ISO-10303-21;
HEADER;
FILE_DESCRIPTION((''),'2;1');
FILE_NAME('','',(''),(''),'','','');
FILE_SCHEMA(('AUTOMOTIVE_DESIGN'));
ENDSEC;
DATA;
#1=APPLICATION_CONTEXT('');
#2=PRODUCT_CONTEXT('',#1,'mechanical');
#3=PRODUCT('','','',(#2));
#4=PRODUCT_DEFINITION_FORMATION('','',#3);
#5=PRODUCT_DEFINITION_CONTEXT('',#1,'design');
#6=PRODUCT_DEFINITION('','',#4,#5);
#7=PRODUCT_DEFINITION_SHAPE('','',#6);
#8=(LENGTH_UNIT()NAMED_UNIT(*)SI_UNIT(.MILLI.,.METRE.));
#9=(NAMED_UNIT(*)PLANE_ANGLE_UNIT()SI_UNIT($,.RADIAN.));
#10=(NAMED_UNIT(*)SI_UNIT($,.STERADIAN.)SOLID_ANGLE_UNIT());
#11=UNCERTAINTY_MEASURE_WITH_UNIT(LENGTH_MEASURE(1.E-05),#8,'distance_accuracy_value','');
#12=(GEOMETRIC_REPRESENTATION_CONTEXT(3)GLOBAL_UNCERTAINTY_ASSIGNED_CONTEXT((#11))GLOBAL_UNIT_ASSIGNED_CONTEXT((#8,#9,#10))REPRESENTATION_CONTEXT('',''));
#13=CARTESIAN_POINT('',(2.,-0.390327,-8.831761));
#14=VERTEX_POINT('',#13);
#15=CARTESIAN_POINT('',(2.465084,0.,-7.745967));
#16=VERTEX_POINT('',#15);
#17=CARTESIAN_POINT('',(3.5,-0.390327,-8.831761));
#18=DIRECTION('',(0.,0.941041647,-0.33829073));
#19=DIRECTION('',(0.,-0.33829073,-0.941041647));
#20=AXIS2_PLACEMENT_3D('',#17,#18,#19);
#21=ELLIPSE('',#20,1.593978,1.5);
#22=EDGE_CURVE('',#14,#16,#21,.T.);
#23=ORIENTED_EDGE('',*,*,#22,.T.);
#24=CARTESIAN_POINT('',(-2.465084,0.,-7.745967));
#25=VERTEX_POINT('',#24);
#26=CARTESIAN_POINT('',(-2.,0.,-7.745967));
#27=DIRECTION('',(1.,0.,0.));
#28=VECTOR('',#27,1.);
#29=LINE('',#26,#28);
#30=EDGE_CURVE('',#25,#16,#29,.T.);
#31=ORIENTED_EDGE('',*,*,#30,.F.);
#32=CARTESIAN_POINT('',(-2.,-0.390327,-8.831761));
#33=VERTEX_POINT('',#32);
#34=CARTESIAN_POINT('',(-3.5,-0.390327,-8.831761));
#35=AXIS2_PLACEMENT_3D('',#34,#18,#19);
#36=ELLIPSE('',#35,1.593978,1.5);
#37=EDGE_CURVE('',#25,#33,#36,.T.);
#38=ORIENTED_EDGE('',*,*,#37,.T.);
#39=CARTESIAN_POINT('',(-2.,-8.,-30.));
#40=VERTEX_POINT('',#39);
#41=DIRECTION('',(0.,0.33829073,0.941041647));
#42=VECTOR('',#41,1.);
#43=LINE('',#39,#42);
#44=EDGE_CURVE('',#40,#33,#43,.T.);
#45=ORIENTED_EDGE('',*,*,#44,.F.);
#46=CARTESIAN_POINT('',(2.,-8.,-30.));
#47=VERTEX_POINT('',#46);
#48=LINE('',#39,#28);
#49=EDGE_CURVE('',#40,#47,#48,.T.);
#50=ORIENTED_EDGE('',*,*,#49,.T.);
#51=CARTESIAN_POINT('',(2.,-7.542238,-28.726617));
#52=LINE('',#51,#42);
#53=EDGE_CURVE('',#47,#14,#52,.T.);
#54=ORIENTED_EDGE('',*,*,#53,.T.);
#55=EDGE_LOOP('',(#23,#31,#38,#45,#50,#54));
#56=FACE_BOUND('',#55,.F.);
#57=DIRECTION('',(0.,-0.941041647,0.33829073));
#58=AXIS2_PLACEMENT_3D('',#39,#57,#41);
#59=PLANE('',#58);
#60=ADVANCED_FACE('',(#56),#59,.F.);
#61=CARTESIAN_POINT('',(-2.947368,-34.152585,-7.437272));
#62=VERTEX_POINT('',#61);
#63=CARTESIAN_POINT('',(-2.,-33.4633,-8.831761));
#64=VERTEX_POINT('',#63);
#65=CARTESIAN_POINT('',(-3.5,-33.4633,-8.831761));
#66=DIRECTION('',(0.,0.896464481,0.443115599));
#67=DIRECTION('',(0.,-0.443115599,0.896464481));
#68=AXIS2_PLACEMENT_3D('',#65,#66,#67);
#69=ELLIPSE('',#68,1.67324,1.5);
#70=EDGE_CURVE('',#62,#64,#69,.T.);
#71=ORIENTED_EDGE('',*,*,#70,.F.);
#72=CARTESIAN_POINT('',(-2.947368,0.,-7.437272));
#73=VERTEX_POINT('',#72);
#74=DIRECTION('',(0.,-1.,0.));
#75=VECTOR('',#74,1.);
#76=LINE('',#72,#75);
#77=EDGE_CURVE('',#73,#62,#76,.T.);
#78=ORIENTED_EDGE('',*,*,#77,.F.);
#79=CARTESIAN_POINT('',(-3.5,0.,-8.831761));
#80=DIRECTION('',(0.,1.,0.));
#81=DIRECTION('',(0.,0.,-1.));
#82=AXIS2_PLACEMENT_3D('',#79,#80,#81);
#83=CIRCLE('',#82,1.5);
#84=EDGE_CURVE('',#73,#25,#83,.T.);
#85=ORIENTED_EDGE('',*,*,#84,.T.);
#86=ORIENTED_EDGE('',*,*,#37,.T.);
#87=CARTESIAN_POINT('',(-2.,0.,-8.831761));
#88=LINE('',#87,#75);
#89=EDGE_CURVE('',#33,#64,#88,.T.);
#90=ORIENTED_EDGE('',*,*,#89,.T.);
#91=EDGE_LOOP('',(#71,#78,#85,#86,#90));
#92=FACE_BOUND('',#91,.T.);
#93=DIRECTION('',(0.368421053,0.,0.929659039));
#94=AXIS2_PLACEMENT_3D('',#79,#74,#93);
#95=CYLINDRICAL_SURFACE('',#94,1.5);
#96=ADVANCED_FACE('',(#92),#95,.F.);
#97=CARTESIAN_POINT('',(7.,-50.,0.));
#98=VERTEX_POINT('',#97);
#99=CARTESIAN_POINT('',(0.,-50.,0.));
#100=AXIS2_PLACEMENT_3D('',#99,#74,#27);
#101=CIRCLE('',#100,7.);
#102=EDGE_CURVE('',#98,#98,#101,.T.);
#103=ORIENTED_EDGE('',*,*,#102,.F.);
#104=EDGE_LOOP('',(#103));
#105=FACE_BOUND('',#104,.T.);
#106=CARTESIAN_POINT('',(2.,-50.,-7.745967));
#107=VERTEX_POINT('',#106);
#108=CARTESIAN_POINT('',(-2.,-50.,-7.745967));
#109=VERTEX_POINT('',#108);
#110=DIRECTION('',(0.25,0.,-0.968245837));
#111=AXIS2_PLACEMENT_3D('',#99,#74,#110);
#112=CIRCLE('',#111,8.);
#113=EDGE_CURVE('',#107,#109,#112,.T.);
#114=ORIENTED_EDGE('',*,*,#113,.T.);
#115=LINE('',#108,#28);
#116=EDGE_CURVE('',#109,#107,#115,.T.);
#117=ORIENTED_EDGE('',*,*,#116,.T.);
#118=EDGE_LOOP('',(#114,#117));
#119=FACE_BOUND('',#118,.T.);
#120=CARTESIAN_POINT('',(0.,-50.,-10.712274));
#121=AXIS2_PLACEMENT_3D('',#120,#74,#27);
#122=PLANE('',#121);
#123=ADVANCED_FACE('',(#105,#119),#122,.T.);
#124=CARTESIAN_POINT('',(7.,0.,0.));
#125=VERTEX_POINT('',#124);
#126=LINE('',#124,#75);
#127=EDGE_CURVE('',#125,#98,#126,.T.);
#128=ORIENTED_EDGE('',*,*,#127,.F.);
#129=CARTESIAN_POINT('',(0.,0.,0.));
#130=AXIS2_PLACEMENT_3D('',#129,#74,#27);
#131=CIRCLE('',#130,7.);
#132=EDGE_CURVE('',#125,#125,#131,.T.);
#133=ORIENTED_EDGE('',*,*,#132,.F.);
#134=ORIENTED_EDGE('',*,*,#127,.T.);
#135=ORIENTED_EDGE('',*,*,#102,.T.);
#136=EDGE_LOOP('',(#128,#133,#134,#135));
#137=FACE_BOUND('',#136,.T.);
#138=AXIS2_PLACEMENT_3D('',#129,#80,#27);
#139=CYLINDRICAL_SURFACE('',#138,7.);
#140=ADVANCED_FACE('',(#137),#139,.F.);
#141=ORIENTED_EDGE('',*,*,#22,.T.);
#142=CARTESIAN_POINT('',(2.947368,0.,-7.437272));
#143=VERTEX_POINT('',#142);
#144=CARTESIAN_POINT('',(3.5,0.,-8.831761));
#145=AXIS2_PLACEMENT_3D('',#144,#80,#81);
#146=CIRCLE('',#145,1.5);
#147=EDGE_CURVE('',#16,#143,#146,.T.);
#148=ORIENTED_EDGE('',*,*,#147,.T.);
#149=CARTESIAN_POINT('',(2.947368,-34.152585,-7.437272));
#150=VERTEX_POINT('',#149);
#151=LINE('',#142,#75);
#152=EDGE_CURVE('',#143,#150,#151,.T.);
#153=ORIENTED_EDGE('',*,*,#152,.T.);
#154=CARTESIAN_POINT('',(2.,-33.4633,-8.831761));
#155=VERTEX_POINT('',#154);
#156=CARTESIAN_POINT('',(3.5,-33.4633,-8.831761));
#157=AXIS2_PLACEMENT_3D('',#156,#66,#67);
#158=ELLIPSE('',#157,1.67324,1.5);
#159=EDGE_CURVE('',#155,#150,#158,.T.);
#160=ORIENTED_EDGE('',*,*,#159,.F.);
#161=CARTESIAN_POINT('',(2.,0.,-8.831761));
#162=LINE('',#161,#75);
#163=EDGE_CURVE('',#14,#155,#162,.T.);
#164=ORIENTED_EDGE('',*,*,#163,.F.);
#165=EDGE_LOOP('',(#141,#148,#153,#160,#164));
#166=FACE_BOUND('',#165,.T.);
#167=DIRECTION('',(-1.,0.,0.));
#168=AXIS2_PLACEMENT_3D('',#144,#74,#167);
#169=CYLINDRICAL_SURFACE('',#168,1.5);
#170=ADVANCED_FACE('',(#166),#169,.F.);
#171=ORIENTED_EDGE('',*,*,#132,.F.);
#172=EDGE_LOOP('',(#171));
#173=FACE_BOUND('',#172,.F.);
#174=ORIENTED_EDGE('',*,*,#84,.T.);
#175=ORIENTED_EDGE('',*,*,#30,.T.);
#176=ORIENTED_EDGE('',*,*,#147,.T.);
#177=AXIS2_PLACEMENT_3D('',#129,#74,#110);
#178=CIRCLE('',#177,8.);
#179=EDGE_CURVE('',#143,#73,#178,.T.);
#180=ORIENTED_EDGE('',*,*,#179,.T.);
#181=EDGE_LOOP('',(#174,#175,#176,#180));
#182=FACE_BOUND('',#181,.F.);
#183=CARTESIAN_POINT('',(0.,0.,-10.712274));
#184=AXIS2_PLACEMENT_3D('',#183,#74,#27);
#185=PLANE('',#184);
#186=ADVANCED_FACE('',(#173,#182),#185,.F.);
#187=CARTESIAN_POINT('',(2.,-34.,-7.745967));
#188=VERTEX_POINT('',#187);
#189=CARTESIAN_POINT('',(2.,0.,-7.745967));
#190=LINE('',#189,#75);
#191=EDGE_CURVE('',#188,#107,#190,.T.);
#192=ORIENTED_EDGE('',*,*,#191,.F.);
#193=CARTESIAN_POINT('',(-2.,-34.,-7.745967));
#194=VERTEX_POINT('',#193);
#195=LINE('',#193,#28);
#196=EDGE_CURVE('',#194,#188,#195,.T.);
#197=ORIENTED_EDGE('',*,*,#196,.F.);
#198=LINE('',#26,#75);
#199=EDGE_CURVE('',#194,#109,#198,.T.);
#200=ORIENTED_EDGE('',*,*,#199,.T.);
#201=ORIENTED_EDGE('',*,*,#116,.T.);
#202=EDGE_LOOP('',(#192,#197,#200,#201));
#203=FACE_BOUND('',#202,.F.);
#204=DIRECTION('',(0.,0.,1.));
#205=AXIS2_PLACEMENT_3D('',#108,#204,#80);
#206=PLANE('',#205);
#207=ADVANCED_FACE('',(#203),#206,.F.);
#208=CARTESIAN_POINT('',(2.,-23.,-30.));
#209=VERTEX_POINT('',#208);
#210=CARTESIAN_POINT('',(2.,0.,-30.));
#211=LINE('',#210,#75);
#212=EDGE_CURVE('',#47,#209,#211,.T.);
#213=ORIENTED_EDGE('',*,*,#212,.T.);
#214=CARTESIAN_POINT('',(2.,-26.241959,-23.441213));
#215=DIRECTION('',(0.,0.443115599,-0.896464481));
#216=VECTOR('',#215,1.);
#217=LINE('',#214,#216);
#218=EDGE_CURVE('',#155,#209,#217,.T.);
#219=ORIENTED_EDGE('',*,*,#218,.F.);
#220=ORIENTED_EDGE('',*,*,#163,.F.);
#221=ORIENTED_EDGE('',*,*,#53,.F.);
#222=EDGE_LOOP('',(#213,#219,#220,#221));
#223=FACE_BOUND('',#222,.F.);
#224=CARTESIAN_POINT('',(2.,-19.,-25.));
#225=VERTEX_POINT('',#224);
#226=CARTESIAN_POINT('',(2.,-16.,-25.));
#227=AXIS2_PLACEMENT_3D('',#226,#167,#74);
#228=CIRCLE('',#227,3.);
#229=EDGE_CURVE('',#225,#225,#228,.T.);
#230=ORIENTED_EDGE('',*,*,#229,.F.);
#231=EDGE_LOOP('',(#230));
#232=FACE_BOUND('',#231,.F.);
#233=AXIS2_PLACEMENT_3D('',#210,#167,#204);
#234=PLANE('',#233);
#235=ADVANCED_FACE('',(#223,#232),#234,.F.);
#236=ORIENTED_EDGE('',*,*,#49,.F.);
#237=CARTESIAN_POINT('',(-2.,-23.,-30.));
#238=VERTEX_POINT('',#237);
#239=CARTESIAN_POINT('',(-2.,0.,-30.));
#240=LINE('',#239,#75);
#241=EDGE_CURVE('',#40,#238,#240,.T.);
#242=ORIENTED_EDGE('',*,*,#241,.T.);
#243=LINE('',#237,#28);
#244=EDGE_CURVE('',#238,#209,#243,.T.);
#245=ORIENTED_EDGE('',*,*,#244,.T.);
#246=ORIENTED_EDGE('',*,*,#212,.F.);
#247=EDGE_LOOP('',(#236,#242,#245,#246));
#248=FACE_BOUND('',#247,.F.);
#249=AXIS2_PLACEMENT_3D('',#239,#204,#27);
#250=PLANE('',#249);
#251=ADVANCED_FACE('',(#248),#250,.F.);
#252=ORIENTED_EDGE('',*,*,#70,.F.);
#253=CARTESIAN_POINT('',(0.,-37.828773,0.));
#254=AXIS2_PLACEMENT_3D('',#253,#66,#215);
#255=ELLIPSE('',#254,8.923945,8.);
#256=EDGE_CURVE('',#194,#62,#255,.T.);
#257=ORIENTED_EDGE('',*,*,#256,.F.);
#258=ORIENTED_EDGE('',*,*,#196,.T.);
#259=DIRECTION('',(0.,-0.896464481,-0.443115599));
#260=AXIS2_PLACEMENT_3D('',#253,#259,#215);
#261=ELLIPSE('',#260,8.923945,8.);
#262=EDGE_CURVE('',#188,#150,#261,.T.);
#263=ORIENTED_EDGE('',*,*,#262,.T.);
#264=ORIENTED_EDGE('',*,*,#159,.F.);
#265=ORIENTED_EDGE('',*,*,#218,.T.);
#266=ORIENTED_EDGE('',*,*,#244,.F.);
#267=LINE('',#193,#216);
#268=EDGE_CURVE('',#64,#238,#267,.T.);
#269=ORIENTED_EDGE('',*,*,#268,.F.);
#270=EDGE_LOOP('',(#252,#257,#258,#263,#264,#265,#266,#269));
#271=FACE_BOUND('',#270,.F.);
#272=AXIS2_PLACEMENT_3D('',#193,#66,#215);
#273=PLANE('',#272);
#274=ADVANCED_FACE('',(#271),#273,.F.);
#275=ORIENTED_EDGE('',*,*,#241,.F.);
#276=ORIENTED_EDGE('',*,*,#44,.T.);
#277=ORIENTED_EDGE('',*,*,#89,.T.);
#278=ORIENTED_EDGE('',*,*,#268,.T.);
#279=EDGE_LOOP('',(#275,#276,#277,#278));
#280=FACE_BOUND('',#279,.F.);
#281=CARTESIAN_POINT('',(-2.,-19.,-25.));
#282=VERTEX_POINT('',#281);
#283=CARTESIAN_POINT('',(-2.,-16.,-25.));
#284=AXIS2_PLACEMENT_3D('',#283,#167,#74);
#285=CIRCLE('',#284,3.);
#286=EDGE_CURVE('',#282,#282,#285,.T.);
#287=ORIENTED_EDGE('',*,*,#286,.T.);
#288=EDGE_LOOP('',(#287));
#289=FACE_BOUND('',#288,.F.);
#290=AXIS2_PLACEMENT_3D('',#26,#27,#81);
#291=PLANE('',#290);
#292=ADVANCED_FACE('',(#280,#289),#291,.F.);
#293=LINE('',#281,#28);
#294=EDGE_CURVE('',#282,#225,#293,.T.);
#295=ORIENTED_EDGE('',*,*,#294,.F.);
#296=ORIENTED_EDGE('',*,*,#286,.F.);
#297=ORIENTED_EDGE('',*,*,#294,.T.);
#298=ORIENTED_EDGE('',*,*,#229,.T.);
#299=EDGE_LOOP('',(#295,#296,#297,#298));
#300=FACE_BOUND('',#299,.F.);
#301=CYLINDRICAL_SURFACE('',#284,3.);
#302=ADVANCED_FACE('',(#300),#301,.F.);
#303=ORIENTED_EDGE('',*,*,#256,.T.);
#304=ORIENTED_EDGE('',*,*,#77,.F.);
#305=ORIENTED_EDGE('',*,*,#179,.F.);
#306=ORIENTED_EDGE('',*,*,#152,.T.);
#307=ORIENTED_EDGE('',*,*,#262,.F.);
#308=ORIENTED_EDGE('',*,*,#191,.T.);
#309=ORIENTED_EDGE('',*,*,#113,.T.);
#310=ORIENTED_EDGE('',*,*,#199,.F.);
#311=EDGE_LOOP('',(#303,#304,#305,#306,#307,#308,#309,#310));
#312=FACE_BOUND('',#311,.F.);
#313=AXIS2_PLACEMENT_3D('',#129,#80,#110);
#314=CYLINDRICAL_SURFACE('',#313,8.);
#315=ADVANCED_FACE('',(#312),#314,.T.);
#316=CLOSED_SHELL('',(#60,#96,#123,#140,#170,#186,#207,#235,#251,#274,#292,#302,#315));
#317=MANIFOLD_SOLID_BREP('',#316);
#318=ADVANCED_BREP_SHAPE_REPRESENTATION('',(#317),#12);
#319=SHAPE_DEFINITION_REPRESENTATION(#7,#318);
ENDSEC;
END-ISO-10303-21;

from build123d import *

# Parameters (mm, degrees)
F0_R     = 7
F1_DEPTH = 50
F3_R     = 3
F4_DEPTH = 25
F5_R     = 1.5


with BuildPart() as f1:
    # F0 (on Front) → F1 (new body)
    with BuildSketch(Plane.XZ):
        with BuildLine():
            Line((2, -30), (2, -7.7459666924))
            ThreePointArc((2, -7.7459666924), (0, 8), (-2, -7.7459666924))
            Line((-2, -7.7459666924), (-2, -30))
            Line((-2, -30), (0, -30))
            Line((0, -30), (2, -30))
        make_face()
        Circle(F0_R, mode=Mode.SUBTRACT)
    extrude(amount=F1_DEPTH)

    # F3 (on face) → F4 (cut)
    with BuildSketch(Plane(origin=(-2, 0, 0), x_dir=(0, -1, 0), z_dir=(-1, 0, 0))):
        Polygon((50, -7.7459666924), (34, -7.7459666924), (23, -30), (50, -30), align=None)
        Polygon((8, -30), (0, -7.7459666924), (0, -30), align=None)
        with Locations((16, -25)):
            Circle(F3_R)
    extrude(amount=-F4_DEPTH, mode=Mode.SUBTRACT)

    # F5 (call 1 of 2: OpenCascade refuses the feature's edges together)
    f5_edges = [f1.edges().sort_by_distance(p)[0] for p in [
        (-2, -17, -7.745967),
    ]]
    fillet(f5_edges, radius=F5_R)

    # F5#2 (call 2 of 2)
    f5_2_edges = [f1.edges().sort_by_distance(p)[0] for p in [
        (2, -17, -7.745967),
    ]]
    fillet(f5_2_edges, radius=F5_R)


solid = f1.part
